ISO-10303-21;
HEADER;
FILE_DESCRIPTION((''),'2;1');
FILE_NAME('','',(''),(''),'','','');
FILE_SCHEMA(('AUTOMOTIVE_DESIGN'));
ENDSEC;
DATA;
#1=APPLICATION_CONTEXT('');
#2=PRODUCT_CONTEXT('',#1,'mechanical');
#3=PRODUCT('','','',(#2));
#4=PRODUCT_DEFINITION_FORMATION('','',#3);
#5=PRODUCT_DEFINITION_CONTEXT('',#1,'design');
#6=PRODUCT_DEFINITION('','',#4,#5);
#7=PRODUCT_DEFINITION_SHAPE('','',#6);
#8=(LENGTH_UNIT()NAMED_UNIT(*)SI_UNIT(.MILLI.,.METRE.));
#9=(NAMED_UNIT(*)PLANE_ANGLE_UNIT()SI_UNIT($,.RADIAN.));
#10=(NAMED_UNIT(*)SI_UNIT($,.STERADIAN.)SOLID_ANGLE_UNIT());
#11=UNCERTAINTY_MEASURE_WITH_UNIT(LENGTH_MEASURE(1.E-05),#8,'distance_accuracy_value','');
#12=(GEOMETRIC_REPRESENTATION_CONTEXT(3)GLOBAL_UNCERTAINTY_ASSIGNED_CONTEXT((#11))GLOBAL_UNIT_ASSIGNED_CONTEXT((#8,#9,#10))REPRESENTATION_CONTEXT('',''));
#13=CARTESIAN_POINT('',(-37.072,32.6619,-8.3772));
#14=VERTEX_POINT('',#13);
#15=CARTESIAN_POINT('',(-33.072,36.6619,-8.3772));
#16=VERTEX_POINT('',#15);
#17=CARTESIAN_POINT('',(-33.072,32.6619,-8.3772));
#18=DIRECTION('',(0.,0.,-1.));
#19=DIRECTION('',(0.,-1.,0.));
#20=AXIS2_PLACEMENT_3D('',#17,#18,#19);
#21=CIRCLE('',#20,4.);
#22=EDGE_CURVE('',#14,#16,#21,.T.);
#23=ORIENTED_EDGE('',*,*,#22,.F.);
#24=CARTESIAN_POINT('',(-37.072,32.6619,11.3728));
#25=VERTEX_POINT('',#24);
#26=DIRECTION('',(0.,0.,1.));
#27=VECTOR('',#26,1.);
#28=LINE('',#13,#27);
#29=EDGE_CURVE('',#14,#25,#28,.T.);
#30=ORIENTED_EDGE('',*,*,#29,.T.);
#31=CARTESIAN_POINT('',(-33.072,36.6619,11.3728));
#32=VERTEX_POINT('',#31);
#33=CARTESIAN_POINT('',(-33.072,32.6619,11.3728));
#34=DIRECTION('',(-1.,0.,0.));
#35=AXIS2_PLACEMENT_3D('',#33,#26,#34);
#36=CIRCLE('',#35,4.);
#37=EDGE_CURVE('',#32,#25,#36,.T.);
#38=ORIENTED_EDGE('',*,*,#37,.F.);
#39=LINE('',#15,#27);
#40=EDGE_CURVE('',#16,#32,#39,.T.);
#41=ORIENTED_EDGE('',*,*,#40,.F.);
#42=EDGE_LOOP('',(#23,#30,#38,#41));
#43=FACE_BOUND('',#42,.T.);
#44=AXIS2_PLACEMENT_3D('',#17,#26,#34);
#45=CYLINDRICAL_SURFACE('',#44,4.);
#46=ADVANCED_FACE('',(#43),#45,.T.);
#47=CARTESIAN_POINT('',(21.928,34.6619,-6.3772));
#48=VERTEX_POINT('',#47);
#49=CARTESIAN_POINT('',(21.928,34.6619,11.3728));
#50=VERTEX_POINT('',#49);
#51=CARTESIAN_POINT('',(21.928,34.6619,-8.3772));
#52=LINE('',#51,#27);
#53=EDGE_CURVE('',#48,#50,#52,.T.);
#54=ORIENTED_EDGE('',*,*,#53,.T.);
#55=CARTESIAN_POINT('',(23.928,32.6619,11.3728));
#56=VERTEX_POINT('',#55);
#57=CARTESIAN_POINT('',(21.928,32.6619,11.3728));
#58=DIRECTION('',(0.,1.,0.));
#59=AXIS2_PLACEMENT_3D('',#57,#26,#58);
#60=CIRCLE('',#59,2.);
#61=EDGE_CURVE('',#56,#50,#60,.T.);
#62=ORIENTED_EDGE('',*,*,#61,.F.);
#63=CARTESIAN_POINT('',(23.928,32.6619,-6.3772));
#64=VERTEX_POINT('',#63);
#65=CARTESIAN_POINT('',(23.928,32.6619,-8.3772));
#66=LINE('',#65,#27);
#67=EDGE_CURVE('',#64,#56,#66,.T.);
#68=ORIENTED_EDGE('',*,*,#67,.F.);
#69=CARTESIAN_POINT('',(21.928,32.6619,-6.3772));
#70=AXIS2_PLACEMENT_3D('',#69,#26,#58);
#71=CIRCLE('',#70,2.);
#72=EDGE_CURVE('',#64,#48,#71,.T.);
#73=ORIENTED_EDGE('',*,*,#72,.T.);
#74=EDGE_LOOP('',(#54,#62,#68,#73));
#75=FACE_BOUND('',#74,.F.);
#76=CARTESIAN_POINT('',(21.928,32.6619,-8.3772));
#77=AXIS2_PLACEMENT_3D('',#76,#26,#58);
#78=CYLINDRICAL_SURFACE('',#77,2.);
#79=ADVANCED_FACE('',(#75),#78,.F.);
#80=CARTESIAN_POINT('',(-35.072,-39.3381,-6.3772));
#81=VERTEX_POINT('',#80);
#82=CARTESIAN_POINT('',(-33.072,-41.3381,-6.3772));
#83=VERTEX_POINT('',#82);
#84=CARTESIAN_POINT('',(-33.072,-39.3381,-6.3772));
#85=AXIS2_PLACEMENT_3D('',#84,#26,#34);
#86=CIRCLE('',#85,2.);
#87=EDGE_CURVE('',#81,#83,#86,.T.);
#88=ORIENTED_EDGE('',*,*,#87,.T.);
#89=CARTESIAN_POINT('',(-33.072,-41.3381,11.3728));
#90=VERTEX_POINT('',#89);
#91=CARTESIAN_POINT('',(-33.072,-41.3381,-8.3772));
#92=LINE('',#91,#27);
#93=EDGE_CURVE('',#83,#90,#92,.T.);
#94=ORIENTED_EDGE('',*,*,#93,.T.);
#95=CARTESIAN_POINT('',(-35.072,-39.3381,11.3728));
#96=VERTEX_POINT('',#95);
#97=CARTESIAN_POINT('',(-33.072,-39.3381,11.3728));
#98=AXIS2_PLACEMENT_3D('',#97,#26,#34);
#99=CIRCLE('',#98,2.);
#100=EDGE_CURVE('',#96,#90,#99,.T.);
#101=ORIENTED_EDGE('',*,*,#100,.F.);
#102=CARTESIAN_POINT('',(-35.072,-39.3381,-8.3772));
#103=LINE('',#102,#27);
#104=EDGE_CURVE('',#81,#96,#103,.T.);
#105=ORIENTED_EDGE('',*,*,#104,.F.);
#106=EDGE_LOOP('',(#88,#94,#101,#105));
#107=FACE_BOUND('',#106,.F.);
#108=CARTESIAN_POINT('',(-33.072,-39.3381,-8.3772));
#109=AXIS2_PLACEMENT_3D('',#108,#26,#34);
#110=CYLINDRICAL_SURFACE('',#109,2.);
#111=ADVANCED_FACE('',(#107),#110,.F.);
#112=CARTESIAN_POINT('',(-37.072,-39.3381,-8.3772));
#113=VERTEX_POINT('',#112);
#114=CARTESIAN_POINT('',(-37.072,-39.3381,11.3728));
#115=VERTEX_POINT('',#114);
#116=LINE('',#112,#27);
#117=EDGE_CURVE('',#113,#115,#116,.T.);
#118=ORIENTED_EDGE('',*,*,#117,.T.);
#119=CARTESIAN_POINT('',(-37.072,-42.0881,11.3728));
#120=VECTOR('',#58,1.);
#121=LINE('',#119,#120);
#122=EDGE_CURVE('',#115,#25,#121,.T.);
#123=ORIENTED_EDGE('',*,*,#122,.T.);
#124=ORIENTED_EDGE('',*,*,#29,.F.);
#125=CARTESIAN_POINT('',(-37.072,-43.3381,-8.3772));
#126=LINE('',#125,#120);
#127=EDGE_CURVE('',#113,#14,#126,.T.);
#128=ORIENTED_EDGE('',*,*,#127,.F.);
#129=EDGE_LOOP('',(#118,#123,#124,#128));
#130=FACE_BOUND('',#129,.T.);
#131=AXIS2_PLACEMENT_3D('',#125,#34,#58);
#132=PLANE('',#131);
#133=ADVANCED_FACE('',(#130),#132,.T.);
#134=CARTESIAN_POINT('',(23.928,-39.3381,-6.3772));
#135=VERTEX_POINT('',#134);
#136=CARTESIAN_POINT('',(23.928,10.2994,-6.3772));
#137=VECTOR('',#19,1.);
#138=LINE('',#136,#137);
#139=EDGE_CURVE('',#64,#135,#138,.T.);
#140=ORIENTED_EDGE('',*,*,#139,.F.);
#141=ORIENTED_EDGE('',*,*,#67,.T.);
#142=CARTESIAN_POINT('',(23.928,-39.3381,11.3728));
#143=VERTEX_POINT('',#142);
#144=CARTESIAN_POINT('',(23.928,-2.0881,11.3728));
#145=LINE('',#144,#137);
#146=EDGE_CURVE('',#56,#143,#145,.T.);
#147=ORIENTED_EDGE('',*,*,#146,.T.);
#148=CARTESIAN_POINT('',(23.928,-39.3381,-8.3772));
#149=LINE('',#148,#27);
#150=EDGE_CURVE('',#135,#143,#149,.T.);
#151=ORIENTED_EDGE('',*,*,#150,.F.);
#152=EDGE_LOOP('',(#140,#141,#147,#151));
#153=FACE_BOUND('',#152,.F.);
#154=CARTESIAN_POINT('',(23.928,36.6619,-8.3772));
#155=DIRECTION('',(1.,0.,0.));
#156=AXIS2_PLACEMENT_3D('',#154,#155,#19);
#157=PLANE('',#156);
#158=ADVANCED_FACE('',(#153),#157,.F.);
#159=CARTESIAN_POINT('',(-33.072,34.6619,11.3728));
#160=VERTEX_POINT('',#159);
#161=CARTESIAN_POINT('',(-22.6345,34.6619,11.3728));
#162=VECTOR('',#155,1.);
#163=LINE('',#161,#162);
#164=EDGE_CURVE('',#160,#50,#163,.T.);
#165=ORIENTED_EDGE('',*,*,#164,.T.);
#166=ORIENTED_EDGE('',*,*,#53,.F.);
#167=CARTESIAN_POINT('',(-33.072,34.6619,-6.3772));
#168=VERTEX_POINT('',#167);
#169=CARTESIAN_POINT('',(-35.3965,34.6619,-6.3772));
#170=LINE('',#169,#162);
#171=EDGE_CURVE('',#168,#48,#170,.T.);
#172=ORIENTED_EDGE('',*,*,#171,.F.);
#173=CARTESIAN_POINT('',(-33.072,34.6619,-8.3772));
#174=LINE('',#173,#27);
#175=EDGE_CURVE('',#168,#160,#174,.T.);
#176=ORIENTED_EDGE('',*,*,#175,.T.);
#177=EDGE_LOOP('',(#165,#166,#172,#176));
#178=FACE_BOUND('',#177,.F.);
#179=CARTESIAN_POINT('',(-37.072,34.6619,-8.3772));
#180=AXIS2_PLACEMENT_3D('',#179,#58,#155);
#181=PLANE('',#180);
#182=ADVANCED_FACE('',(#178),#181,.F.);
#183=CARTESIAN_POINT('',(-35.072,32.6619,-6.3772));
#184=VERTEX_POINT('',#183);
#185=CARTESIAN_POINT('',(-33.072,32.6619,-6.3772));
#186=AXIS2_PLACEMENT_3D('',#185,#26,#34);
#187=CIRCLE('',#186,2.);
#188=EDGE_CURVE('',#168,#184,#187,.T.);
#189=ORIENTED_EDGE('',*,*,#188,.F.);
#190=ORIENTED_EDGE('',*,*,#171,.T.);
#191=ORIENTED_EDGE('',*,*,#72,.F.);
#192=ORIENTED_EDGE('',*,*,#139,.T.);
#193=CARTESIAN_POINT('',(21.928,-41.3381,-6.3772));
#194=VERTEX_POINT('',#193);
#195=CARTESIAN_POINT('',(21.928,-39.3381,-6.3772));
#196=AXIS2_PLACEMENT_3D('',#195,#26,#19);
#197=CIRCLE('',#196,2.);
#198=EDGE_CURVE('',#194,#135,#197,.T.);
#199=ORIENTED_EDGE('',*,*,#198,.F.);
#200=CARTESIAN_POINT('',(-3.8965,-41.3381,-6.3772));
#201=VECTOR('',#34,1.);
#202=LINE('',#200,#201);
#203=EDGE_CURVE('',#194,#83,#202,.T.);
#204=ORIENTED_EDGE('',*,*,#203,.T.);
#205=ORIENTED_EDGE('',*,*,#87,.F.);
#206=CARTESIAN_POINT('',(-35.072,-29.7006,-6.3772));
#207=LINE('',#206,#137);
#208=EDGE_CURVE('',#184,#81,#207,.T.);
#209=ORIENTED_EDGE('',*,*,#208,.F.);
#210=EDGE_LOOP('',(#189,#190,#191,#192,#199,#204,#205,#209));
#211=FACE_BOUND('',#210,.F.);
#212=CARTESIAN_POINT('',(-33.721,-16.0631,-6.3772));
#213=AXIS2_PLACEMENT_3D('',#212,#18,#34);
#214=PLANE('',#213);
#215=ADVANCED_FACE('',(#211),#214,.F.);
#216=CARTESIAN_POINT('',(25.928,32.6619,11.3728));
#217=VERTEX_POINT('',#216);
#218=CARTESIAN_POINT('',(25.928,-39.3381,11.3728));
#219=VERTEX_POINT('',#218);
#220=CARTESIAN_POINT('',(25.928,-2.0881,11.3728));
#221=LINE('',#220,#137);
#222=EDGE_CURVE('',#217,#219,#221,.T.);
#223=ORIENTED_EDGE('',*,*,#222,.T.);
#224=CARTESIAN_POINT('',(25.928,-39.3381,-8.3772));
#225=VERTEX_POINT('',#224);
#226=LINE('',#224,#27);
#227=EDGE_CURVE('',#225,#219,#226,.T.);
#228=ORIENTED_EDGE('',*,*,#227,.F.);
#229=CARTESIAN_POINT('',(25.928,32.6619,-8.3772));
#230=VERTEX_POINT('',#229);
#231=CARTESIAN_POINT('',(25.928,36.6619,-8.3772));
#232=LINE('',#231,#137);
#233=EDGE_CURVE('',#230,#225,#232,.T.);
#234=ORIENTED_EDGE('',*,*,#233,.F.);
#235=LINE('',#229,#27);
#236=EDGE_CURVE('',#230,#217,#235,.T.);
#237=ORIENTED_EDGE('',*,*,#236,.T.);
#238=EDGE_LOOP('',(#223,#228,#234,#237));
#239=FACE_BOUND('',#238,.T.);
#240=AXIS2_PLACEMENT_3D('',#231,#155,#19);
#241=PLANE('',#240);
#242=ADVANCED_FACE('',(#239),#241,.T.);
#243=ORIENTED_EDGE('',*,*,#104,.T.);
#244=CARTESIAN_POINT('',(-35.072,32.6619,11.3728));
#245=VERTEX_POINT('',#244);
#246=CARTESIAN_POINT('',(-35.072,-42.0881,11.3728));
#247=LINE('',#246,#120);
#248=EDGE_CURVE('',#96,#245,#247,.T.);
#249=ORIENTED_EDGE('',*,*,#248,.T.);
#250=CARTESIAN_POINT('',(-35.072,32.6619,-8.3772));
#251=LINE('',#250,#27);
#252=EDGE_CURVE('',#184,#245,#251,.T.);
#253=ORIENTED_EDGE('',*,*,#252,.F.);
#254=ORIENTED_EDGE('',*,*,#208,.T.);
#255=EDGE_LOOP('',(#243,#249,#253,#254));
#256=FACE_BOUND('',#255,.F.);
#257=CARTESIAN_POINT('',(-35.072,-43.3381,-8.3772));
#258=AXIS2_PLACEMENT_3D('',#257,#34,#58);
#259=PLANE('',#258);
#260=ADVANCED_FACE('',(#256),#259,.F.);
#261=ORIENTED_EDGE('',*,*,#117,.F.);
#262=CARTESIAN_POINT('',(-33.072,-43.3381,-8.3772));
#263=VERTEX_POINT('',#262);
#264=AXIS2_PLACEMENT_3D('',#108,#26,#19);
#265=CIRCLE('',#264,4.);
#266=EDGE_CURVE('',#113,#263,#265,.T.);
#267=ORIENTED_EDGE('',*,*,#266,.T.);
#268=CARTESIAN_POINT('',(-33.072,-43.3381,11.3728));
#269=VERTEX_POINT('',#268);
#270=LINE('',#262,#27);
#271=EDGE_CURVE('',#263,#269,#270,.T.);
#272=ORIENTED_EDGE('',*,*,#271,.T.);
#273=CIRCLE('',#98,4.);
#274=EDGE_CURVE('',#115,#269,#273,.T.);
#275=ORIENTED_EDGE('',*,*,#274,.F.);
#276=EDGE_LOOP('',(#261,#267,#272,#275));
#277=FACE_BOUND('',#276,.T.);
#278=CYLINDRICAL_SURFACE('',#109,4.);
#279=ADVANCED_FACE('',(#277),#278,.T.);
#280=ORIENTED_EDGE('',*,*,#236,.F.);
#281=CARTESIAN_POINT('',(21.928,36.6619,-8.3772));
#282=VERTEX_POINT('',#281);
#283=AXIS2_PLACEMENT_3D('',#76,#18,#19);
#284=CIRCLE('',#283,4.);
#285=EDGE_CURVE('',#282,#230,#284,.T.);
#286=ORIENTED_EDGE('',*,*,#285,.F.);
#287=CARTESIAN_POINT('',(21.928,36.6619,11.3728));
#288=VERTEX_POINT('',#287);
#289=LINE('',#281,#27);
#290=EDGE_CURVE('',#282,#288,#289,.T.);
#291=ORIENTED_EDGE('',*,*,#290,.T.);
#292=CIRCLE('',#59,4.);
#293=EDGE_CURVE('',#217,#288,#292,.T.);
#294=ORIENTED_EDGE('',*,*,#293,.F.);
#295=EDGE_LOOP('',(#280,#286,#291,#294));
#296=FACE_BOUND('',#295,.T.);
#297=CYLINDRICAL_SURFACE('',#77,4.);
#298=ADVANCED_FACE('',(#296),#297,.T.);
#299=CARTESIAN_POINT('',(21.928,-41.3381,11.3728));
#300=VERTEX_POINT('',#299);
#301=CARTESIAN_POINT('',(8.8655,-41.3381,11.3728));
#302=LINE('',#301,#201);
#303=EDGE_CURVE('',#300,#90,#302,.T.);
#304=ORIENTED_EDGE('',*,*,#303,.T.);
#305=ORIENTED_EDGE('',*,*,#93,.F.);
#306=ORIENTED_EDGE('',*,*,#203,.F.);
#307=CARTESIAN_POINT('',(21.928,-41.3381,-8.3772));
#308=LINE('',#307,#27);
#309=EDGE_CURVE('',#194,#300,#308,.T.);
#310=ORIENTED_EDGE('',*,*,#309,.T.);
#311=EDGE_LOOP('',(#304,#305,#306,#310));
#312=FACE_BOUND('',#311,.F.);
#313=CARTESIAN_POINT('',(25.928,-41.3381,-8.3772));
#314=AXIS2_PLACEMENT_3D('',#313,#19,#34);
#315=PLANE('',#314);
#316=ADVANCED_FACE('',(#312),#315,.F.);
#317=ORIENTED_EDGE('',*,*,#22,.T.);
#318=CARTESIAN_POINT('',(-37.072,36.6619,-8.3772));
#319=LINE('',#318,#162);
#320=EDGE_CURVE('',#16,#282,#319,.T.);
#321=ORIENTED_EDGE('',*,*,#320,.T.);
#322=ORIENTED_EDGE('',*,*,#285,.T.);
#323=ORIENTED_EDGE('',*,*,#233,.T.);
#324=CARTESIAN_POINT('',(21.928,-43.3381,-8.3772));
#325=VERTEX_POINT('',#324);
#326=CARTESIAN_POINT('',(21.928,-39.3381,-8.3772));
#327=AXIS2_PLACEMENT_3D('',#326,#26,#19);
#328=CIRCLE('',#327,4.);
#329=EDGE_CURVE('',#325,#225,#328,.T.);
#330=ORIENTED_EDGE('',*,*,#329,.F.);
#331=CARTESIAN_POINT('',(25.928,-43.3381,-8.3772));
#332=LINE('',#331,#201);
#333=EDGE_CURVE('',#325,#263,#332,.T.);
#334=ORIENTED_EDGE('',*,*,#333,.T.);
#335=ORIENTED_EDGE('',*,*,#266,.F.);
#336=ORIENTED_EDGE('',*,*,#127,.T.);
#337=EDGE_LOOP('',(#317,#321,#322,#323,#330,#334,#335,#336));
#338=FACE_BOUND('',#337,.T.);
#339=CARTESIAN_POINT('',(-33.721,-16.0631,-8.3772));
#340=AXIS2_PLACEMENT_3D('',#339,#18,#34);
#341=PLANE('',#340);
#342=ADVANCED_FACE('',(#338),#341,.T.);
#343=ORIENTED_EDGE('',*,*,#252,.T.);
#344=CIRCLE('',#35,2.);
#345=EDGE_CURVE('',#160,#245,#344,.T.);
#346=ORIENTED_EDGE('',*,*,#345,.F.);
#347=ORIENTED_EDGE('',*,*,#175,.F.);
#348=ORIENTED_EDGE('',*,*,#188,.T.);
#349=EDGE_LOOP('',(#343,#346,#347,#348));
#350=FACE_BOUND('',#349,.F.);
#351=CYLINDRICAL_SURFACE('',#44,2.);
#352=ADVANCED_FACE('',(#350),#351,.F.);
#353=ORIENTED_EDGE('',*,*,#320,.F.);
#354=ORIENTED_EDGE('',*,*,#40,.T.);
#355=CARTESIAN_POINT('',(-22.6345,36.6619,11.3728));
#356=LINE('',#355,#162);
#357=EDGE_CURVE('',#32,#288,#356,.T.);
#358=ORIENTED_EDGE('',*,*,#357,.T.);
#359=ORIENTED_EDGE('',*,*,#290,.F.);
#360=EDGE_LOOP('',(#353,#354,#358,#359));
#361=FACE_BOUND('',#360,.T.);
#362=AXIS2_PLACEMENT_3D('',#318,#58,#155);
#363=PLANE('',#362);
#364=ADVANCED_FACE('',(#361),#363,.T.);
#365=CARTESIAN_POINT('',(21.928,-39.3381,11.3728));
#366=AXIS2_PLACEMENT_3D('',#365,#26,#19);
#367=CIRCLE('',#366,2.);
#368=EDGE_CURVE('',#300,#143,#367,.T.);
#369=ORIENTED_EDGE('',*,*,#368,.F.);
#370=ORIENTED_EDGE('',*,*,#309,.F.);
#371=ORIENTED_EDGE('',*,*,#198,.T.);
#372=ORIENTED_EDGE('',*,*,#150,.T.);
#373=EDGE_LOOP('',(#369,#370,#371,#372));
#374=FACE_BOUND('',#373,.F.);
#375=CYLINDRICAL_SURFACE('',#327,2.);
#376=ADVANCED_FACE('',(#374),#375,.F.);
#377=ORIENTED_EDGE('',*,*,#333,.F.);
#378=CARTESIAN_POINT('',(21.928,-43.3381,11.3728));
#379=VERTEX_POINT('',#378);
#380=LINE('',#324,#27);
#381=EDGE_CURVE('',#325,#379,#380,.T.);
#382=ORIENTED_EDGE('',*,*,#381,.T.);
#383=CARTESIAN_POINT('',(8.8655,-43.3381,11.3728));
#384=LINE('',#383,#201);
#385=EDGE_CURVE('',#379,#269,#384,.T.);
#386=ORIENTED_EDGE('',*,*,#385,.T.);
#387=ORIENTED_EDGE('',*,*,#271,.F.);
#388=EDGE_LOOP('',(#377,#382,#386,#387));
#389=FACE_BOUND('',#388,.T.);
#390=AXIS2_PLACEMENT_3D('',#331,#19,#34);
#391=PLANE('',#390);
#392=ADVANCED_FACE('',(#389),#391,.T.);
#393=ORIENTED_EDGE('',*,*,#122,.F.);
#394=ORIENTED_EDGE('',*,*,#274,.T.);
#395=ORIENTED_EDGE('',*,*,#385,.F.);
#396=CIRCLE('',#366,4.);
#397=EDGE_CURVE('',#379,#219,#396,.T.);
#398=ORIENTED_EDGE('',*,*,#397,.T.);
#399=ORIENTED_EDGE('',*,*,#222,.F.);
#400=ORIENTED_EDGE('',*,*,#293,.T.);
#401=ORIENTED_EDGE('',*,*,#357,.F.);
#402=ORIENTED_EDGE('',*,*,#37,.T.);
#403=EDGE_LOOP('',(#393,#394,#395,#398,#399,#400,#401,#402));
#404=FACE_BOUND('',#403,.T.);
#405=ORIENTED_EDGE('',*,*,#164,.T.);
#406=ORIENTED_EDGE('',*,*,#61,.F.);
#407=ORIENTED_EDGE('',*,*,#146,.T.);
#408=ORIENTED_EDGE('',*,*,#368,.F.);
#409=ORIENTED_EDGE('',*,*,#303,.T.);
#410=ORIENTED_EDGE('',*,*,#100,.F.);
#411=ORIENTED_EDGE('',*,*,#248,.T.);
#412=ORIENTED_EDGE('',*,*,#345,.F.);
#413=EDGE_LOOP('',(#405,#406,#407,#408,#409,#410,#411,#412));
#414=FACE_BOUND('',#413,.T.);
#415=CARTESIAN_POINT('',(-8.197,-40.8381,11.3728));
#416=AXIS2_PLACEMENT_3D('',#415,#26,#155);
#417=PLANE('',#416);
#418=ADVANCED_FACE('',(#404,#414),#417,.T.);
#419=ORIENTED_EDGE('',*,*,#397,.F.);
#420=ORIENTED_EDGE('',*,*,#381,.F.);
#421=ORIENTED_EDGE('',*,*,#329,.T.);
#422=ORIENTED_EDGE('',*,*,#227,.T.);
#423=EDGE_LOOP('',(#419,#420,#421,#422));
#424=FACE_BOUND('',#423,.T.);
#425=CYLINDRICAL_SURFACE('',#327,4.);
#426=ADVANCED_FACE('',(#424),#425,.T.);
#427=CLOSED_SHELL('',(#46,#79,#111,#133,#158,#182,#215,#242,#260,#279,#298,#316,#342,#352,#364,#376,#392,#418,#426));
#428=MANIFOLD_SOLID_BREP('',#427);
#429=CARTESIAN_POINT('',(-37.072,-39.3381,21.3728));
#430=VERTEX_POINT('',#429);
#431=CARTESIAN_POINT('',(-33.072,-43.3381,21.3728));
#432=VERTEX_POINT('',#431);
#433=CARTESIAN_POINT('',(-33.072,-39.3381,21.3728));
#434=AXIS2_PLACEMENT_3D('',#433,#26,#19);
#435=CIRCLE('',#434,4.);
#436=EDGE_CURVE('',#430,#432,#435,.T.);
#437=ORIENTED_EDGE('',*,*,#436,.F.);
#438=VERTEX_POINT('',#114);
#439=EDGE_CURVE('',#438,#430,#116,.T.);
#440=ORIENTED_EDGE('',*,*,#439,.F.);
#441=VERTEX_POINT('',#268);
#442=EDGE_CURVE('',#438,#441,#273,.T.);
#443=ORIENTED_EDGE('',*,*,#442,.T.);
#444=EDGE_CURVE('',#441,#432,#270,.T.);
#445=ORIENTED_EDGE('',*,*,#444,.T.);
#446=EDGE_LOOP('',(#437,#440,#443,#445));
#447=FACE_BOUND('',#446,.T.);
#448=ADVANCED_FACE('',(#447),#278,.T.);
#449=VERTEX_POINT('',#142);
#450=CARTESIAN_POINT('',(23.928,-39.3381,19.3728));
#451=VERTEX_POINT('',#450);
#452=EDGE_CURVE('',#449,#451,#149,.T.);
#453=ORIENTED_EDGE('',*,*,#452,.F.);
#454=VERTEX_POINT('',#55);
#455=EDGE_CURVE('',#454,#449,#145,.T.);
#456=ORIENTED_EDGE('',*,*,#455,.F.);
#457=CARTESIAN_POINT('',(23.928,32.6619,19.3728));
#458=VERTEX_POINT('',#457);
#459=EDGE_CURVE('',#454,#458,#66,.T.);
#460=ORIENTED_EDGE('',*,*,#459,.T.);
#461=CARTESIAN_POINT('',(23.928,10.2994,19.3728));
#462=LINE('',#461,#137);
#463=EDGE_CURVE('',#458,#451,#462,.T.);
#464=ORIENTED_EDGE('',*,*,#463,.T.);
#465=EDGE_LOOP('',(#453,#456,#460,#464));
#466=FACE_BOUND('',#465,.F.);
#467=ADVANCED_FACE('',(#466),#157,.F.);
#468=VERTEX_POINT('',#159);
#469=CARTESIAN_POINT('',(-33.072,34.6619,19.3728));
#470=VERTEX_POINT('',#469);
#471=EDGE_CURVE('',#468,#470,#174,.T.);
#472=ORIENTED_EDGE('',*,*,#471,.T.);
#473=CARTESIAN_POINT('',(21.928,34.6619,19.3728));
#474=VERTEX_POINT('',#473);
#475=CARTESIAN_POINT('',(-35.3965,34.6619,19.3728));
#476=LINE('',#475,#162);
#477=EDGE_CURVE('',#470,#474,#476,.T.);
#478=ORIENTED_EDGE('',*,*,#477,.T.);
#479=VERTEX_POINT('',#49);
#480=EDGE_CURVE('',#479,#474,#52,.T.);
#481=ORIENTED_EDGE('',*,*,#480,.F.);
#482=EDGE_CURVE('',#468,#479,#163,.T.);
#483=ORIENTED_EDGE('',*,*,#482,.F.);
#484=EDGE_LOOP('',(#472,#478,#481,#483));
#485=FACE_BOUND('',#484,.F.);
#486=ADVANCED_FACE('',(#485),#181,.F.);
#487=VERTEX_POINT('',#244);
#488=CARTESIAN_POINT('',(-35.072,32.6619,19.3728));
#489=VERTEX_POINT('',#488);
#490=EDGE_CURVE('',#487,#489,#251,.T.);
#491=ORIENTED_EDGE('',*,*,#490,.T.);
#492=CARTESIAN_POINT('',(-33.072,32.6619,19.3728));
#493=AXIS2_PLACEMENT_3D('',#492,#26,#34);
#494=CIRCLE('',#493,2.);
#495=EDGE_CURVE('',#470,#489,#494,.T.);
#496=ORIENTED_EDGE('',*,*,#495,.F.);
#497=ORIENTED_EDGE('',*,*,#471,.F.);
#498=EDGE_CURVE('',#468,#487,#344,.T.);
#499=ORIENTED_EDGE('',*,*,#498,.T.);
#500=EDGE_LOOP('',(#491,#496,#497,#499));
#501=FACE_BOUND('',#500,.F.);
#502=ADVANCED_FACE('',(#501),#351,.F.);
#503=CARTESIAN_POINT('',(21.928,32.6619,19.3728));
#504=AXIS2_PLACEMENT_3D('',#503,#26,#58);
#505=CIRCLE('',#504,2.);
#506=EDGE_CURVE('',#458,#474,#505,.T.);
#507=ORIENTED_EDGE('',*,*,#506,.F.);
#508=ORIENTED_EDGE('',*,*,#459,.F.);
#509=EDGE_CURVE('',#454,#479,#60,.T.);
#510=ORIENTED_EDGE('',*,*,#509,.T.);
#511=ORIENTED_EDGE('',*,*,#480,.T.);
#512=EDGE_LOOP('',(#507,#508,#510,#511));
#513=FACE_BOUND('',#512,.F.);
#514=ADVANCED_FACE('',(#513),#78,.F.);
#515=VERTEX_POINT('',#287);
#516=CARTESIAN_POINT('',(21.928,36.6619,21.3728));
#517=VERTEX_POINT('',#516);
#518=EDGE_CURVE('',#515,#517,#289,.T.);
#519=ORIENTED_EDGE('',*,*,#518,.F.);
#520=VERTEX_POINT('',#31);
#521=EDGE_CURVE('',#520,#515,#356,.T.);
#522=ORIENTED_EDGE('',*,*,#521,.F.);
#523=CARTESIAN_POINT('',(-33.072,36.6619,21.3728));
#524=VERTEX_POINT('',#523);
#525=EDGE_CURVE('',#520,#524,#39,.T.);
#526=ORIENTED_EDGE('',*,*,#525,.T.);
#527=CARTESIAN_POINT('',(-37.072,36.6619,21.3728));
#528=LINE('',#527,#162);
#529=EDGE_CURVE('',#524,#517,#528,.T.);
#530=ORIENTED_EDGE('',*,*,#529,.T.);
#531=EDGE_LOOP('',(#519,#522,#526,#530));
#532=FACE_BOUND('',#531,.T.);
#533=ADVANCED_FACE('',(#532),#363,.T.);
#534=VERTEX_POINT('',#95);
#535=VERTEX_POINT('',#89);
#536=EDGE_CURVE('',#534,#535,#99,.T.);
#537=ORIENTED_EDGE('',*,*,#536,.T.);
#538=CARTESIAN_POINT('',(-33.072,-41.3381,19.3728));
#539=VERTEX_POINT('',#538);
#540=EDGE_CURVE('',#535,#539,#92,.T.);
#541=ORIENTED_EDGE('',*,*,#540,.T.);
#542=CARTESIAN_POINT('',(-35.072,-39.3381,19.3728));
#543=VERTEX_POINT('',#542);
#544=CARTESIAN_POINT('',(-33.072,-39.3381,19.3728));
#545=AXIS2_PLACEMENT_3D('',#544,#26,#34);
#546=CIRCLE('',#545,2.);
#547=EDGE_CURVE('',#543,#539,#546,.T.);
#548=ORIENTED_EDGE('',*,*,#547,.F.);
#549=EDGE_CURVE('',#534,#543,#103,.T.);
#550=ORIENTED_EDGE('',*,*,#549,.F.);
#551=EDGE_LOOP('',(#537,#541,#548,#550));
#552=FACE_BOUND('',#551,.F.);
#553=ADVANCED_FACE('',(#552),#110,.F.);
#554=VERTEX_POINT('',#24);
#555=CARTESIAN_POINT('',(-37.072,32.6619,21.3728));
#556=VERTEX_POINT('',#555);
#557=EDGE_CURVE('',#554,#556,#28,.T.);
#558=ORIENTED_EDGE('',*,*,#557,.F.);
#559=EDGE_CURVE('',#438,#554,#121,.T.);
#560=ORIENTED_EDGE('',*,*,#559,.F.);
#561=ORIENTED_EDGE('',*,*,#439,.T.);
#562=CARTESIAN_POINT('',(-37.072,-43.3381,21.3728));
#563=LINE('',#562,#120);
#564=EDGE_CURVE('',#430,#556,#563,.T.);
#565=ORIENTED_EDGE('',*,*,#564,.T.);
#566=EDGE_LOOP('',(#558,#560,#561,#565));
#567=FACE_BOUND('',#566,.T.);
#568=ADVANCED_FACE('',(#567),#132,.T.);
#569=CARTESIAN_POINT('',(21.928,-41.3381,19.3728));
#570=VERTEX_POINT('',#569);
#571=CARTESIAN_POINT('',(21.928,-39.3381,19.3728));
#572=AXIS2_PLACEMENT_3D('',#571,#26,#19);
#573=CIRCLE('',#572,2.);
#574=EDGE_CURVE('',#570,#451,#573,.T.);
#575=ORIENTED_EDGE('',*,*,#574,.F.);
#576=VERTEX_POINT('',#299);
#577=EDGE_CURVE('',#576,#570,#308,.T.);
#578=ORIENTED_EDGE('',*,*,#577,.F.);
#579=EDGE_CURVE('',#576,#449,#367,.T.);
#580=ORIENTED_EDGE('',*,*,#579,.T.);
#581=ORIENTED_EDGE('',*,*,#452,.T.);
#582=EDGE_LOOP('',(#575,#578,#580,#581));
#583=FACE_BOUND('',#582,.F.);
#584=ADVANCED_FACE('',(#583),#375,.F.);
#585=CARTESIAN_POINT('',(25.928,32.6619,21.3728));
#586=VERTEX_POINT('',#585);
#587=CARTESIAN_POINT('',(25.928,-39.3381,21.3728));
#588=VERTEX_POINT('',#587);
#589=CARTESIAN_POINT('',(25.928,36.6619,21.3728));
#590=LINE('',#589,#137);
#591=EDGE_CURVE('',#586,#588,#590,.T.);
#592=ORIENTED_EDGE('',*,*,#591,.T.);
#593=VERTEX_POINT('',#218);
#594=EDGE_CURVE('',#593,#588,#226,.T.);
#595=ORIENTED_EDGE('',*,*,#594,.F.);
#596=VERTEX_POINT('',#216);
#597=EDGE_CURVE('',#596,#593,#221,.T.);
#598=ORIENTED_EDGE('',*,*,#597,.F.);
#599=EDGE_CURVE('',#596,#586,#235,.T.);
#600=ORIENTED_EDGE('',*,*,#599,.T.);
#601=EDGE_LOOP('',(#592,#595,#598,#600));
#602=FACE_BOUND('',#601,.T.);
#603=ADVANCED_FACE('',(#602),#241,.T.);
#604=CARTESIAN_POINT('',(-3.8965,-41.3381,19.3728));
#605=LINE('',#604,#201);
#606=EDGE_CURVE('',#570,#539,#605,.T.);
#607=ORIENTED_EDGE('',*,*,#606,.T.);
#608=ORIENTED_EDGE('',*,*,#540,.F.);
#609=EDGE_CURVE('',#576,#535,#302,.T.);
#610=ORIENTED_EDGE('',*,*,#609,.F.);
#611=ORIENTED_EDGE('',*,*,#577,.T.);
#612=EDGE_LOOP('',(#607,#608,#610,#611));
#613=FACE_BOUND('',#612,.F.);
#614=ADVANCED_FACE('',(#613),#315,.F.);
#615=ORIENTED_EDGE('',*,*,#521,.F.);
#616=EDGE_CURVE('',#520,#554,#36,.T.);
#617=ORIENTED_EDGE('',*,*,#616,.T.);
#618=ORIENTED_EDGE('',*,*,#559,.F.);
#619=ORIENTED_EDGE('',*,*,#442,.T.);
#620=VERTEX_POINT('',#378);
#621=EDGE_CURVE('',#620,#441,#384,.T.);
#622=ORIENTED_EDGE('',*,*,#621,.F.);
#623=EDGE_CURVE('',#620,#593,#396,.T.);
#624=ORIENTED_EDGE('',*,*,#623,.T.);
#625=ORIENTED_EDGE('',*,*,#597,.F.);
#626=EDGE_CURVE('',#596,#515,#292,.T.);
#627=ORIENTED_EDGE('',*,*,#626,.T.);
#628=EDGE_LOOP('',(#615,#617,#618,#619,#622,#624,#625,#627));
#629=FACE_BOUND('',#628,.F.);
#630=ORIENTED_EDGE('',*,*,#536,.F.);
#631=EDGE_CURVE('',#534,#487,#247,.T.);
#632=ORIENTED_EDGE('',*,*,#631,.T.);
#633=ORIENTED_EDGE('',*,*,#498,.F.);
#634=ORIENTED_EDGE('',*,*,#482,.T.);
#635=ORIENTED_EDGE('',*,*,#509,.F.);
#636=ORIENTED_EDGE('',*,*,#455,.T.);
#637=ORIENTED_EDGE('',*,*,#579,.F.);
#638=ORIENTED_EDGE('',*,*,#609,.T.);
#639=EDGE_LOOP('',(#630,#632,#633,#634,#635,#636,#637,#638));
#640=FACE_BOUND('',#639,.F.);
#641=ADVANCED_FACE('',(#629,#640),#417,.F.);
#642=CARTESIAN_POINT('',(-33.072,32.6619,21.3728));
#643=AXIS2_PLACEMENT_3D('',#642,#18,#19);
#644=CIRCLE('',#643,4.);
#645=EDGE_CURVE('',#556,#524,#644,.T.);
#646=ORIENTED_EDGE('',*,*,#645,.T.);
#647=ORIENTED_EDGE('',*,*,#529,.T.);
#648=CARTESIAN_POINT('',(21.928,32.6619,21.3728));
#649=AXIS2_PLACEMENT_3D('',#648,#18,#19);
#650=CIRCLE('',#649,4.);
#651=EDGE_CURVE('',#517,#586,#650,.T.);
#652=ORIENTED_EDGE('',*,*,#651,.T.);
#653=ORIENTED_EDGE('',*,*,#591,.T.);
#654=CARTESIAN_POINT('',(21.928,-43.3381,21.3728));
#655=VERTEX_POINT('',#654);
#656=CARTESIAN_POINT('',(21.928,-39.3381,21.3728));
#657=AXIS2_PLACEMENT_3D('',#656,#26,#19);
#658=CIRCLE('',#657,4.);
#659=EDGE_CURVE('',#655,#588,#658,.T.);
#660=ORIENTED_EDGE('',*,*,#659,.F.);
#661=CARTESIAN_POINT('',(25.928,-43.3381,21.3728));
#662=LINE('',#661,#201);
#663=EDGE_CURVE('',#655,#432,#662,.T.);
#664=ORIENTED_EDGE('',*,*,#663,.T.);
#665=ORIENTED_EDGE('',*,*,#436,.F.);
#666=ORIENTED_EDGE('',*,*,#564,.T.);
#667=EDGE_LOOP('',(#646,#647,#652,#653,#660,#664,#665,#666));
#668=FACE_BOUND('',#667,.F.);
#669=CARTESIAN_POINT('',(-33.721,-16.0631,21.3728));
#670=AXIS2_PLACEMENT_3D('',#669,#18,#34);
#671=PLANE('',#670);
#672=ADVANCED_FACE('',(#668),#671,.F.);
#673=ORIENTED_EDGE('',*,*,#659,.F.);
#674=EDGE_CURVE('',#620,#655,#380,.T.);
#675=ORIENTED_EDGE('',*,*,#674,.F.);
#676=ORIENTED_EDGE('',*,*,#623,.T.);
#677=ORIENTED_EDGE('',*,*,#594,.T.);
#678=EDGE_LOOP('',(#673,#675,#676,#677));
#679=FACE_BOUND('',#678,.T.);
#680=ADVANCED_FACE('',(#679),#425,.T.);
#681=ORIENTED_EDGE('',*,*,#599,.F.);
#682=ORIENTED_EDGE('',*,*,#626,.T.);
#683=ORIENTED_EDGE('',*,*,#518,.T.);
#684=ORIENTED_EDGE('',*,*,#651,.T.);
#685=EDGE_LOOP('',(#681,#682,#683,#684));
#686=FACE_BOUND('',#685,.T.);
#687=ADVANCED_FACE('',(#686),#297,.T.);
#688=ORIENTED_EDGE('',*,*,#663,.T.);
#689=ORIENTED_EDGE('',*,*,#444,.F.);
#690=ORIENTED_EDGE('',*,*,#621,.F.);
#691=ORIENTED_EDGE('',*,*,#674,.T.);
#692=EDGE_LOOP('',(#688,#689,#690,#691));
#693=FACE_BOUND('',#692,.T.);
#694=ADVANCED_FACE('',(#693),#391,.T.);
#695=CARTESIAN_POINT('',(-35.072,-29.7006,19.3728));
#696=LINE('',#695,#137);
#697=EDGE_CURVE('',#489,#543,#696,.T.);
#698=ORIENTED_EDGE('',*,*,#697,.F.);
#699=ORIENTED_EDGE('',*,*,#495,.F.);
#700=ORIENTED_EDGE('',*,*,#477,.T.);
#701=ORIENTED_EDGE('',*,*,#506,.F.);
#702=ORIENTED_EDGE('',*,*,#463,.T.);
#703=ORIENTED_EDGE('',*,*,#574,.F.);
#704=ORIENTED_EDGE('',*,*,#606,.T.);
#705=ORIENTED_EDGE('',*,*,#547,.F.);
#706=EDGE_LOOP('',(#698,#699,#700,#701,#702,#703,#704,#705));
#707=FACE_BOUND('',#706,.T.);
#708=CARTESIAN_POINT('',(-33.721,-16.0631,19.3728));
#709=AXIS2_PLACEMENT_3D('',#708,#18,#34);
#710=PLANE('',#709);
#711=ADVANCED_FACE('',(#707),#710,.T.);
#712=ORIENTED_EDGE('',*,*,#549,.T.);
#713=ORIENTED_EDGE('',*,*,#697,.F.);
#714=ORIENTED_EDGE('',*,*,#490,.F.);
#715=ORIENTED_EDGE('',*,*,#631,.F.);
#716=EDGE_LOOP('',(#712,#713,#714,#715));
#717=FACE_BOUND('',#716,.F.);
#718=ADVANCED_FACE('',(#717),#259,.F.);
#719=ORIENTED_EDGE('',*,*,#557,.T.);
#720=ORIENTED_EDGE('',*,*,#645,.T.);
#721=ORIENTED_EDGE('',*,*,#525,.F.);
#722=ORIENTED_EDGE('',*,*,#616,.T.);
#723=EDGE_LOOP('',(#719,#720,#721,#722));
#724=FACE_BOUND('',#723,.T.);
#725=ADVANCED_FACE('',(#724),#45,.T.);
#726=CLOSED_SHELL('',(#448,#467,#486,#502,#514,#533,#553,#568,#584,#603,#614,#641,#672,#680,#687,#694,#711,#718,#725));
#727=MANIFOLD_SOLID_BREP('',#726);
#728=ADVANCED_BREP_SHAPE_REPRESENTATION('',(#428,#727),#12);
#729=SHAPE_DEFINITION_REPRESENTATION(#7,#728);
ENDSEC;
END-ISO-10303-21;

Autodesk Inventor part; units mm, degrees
ref_plane "YZ Plane" through (0, 0, 0) normal (1, 0, 0) x (0, 1, 0)
ref_plane "XZ Plane" through (0, 0, 0) normal (0, 1, 0) x (-1, 0, 0)
ref_plane "Work Plane3" through (-33.721, -16.0631, -8.3772) normal (0, 0, -1) x (-1, 0, 0)
sketch "Sketch2" plane through (-33.721, -16.0631, -8.3772) normal (0, 0, -1) x (-1, 0, 0)
  line L0 (3.351, 52.725) -> (-59.649, 52.725)
  line L1 (-59.649, 52.725) -> (-59.649, -27.275)
  line L2 (-59.649, -27.275) -> (3.351, -27.275)
  line L3 (3.351, -27.275) -> (3.351, 52.725)
  line L4 (3.351, 52.725) -> (-59.649, -27.275) construction
  line L5 (-59.649, 52.725) -> (3.351, -27.275) construction
  line L6 (-25.524, -24.775) -> (-3.524, -24.775)
  line L7 (-0.024, 32.975) -> (-0.024, 14.6)
  line L8 (-56.274, -10.275) -> (-56.274, 32.975)
  line L9 (-3.524, 50.225) -> (-25.524, 50.225)
  line L10 (-1.524, 34.475) -> (-56.274, 34.475)
  line L11 (-56.274, -11.775) -> (-56.274, 34.475)
  line L12 (-56.274, -11.775) -> (-1.524, -11.775)
  line L13 (-1.524, -11.775) -> (-1.1358, -11.7239)
  line L14 (-0.774, -11.574) -> (-1.1358, -11.7239)
  line L15 (-0.4633, -11.3357) -> (-0.774, -11.574)
  line L16 (-0.4633, -11.3357) -> (-0.225, -11.025)
  line L17 (-0.0751, -10.6632) -> (-0.225, -11.025)
  line L18 (-0.024, -10.275) -> (-0.0751, -10.6632)
  line L19 (-0.024, 0) -> (-0.024, -10.275)
  line L20 (-0.024, 0) -> (-14.65, 0)
  line L21 (-14.65, 14.6) -> (-14.65, 0)
  line L22 (-0.024, 14.6) -> (-14.65, 14.6)
  line L23 (-0.024, 32.975) -> (-0.024, 14.6)
  line L24 (-0.024, 32.975) -> (-0.0751, 33.3632)
  line L25 (-0.0751, 33.3632) -> (-0.225, 33.725)
  line L26 (-0.225, 33.725) -> (-0.4633, 34.0357)
  line L27 (-0.774, 34.274) -> (-0.4633, 34.0357)
  line L28 (-1.1358, 34.4239) -> (-0.774, 34.274)
  line L29 (-1.1358, 34.4239) -> (-1.524, 34.475)
  line L30 (-46.714, -1.95) -> (-47.364, -1.95)
  line L31 (-46.714, -1.95) -> (-46.714, -2.6)
  line L32 (-47.364, -2.6) -> (-46.714, -2.6)
  line L33 (-47.364, -2.6) -> (-47.364, -1.95)
  line L34 (-37.794, -7.64) -> (-38.444, -7.64)
  line L35 (-37.794, -8.29) -> (-37.794, -7.64)
  line L36 (-38.444, -8.29) -> (-37.794, -8.29)
  line L37 (-38.444, -8.29) -> (-38.444, -7.64)
  line L38 (-2.8885, -10.3772) -> (-3.149, -10.4)
  line L39 (-3.4095, -10.3772) -> (-3.149, -10.4)
  line L40 (-3.662, -10.3095) -> (-3.4095, -10.3772)
  line L41 (-3.899, -10.199) -> (-3.662, -10.3095)
  line L42 (-3.899, -10.199) -> (-4.1132, -10.0491)
  line L43 (-4.1132, -10.0491) -> (-4.2981, -9.8642)
  line L44 (-4.2981, -9.8642) -> (-4.448, -9.65)
  line L45 (-4.5585, -9.413) -> (-4.448, -9.65)
  line L46 (-4.5585, -9.413) -> (-4.6262, -9.1605)
  line L47 (-4.6262, -9.1605) -> (-4.649, -8.9)
  line L48 (-4.649, -8.9) -> (-4.6262, -8.6395)
  line L49 (-4.5585, -8.387) -> (-4.6262, -8.6395)
  line L50 (-4.5585, -8.387) -> (-4.448, -8.15)
  line L51 (-4.448, -8.15) -> (-4.2981, -7.9358)
  line L52 (-4.2981, -7.9358) -> (-4.1132, -7.7509)
  line L53 (-3.899, -7.601) -> (-4.1132, -7.7509)
  line L54 (-3.662, -7.4905) -> (-3.899, -7.601)
  line L55 (-3.662, -7.4905) -> (-3.4095, -7.4228)
  line L56 (-3.4095, -7.4228) -> (-3.149, -7.4)
  line L57 (-2.8885, -7.4228) -> (-3.149, -7.4)
  line L58 (-2.636, -7.4905) -> (-2.8885, -7.4228)
  line L59 (-2.399, -7.601) -> (-2.636, -7.4905)
  line L60 (-2.399, -7.601) -> (-2.1848, -7.7509)
  line L61 (-1.9999, -7.9358) -> (-2.1848, -7.7509)
  line L62 (-1.85, -8.15) -> (-1.9999, -7.9358)
  line L63 (-1.85, -8.15) -> (-1.7395, -8.387)
  line L64 (-1.7395, -8.387) -> (-1.6718, -8.6395)
  line L65 (-1.6718, -8.6395) -> (-1.649, -8.9)
  line L66 (-1.649, -8.9) -> (-1.6718, -9.1605)
  line L67 (-1.7395, -9.413) -> (-1.6718, -9.1605)
  line L68 (-1.7395, -9.413) -> (-1.85, -9.65)
  line L69 (-1.9999, -9.8642) -> (-1.85, -9.65)
  line L70 (-1.9999, -9.8642) -> (-2.1848, -10.0491)
  line L71 (-2.399, -10.199) -> (-2.1848, -10.0491)
  line L72 (-2.636, -10.3095) -> (-2.399, -10.199)
  line L73 (-2.636, -10.3095) -> (-2.8885, -10.3772)
  line L74 (-7.964, -8.29) -> (-7.314, -8.29)
  line L75 (-7.964, -8.29) -> (-7.964, -7.64)
  line L76 (-7.964, -7.64) -> (-7.314, -7.64)
  line L77 (-7.314, -7.64) -> (-7.314, -8.29)
  line L78 (-10.504, -10.83) -> (-9.854, -10.83)
  line L79 (-10.504, -10.18) -> (-10.504, -10.83)
  line L80 (-10.504, -10.18) -> (-9.854, -10.18)
  line L81 (-9.854, -10.18) -> (-9.854, -10.83)
  line L82 (-15.584, -10.83) -> (-14.934, -10.83)
  line L83 (-15.584, -10.18) -> (-15.584, -10.83)
  line L84 (-14.934, -10.18) -> (-15.584, -10.18)
  line L85 (-14.934, -10.18) -> (-14.934, -10.83)
  line L86 (-15.584, -8.29) -> (-14.934, -8.29)
  line L87 (-15.584, -7.64) -> (-15.584, -8.29)
  line L88 (-15.584, -7.64) -> (-14.934, -7.64)
  line L89 (-14.934, -7.64) -> (-14.934, -8.29)
  line L90 (-17.474, -7.64) -> (-17.474, -8.29)
  line L91 (-18.124, -8.29) -> (-17.474, -8.29)
  line L92 (-18.124, -7.64) -> (-18.124, -8.29)
  line L93 (-17.474, -7.64) -> (-18.124, -7.64)
  line L94 (-20.014, -7.64) -> (-20.014, -8.29)
  line L95 (-20.664, -8.29) -> (-20.014, -8.29)
  line L96 (-20.664, -7.64) -> (-20.664, -8.29)
  line L97 (-20.014, -7.64) -> (-20.664, -7.64)
  line L98 (-22.554, -7.64) -> (-22.554, -8.29)
  line L99 (-23.204, -8.29) -> (-22.554, -8.29)
  line L100 (-23.204, -7.64) -> (-23.204, -8.29)
  line L101 (-22.554, -7.64) -> (-23.204, -7.64)
  line L102 (-25.094, -7.64) -> (-25.094, -8.29)
  line L103 (-25.744, -8.29) -> (-25.094, -8.29)
  line L104 (-25.744, -7.64) -> (-25.744, -8.29)
  line L105 (-25.094, -7.64) -> (-25.744, -7.64)
  line L106 (-27.634, -7.64) -> (-27.634, -8.29)
  line L107 (-28.284, -8.29) -> (-27.634, -8.29)
  line L108 (-28.284, -8.29) -> (-28.284, -7.64)
  line L109 (-27.634, -7.64) -> (-28.284, -7.64)
  line L110 (-30.824, -10.83) -> (-30.174, -10.83)
  line L111 (-30.824, -10.18) -> (-30.824, -10.83)
  line L112 (-30.174, -10.18) -> (-30.824, -10.18)
  line L113 (-30.174, -10.18) -> (-30.174, -10.83)
  line L114 (-33.364, -10.83) -> (-32.714, -10.83)
  line L115 (-33.364, -10.18) -> (-33.364, -10.83)
  line L116 (-32.714, -10.18) -> (-33.364, -10.18)
  line L117 (-32.714, -10.18) -> (-32.714, -10.83)
  line L118 (-35.904, -10.83) -> (-35.254, -10.83)
  line L119 (-35.904, -10.18) -> (-35.904, -10.83)
  line L120 (-35.254, -10.18) -> (-35.904, -10.18)
  line L121 (-35.254, -10.18) -> (-35.254, -10.83)
  line L122 (-38.444, -10.83) -> (-37.794, -10.83)
  line L123 (-38.444, -10.18) -> (-38.444, -10.83)
  line L124 (-37.794, -10.18) -> (-38.444, -10.18)
  line L125 (-37.794, -10.18) -> (-37.794, -10.83)
  line L126 (-40.984, -10.83) -> (-40.334, -10.83)
  line L127 (-40.984, -10.18) -> (-40.984, -10.83)
  line L128 (-40.334, -10.18) -> (-40.984, -10.18)
  line L129 (-40.334, -10.18) -> (-40.334, -10.83)
  line L130 (-35.254, -7.64) -> (-35.254, -8.29)
  line L131 (-35.904, -8.29) -> (-35.254, -8.29)
  line L132 (-35.904, -8.29) -> (-35.904, -7.64)
  line L133 (-35.254, -7.64) -> (-35.904, -7.64)
  line L134 (-32.714, -7.64) -> (-32.714, -8.29)
  line L135 (-33.364, -8.29) -> (-32.714, -8.29)
  line L136 (-33.364, -8.29) -> (-33.364, -7.64)
  line L137 (-32.714, -7.64) -> (-33.364, -7.64)
  line L138 (-30.174, -7.64) -> (-30.174, -8.29)
  line L139 (-30.824, -8.29) -> (-30.174, -8.29)
  line L140 (-30.824, -8.29) -> (-30.824, -7.64)
  line L141 (-30.174, -7.64) -> (-30.824, -7.64)
  line L142 (-28.284, -10.83) -> (-27.634, -10.83)
  line L143 (-28.284, -10.18) -> (-28.284, -10.83)
  line L144 (-27.634, -10.18) -> (-28.284, -10.18)
  line L145 (-27.634, -10.18) -> (-27.634, -10.83)
  line L146 (-25.744, -10.83) -> (-25.094, -10.83)
  line L147 (-25.744, -10.18) -> (-25.744, -10.83)
  line L148 (-25.094, -10.18) -> (-25.744, -10.18)
  line L149 (-25.094, -10.18) -> (-25.094, -10.83)
  line L150 (-23.204, -10.83) -> (-22.554, -10.83)
  line L151 (-23.204, -10.18) -> (-23.204, -10.83)
  line L152 (-22.554, -10.18) -> (-23.204, -10.18)
  line L153 (-22.554, -10.18) -> (-22.554, -10.83)
  line L154 (-20.664, -10.83) -> (-20.014, -10.83)
  line L155 (-20.664, -10.18) -> (-20.664, -10.83)
  line L156 (-20.014, -10.18) -> (-20.664, -10.18)
  line L157 (-20.014, -10.18) -> (-20.014, -10.83)
  line L158 (-10.504, -8.29) -> (-9.854, -8.29)
  line L159 (-10.504, -8.29) -> (-10.504, -7.64)
  line L160 (-10.504, -7.64) -> (-9.854, -7.64)
  line L161 (-9.854, -7.64) -> (-9.854, -8.29)
  line L162 (-12.394, -8.29) -> (-12.394, -7.64)
  line L163 (-13.044, -8.29) -> (-12.394, -8.29)
  line L164 (-13.044, -8.29) -> (-13.044, -7.64)
  line L165 (-13.044, -7.64) -> (-12.394, -7.64)
  line L166 (-18.124, -10.83) -> (-17.474, -10.83)
  line L167 (-18.124, -10.18) -> (-18.124, -10.83)
  line L168 (-17.474, -10.18) -> (-18.124, -10.18)
  line L169 (-17.474, -10.18) -> (-17.474, -10.83)
  line L170 (-13.044, -10.83) -> (-12.394, -10.83)
  line L171 (-13.044, -10.18) -> (-13.044, -10.83)
  line L172 (-12.394, -10.18) -> (-13.044, -10.18)
  line L173 (-12.394, -10.18) -> (-12.394, -10.83)
  line L174 (-7.964, -10.83) -> (-7.314, -10.83)
  line L175 (-7.964, -10.18) -> (-7.964, -10.83)
  line L176 (-7.964, -10.18) -> (-7.314, -10.18)
  line L177 (-7.314, -10.18) -> (-7.314, -10.83)
  line L178 (-40.334, -8.29) -> (-40.334, -7.64)
  line L179 (-40.984, -8.29) -> (-40.334, -8.29)
  line L180 (-40.984, -8.29) -> (-40.984, -7.64)
  line L181 (-40.984, -7.64) -> (-40.334, -7.64)
  line L182 (-44.174, -2.6) -> (-44.174, -1.95)
  line L183 (-44.824, -2.6) -> (-44.174, -2.6)
  line L184 (-44.824, -1.95) -> (-44.824, -2.6)
  line L185 (-44.824, -1.95) -> (-44.174, -1.95)
  line L186 (-37.794, 32.88) -> (-37.794, 33.53)
  line L187 (-37.794, 32.88) -> (-38.444, 32.88)
  line L188 (-38.444, 32.88) -> (-38.444, 33.53)
  line L189 (-38.444, 33.53) -> (-37.794, 33.53)
  line L190 (-35.254, 32.88) -> (-35.254, 33.53)
  line L191 (-35.254, 32.88) -> (-35.904, 32.88)
  line L192 (-35.904, 32.88) -> (-35.904, 33.53)
  line L193 (-35.904, 33.53) -> (-35.254, 33.53)
  line L194 (-32.714, 32.88) -> (-32.714, 33.53)
  line L195 (-32.714, 32.88) -> (-33.364, 32.88)
  line L196 (-33.364, 32.88) -> (-33.364, 33.53)
  line L197 (-33.364, 33.53) -> (-32.714, 33.53)
  line L198 (-30.174, 32.88) -> (-30.174, 33.53)
  line L199 (-30.174, 32.88) -> (-30.824, 32.88)
  line L200 (-30.824, 32.88) -> (-30.824, 33.53)
  line L201 (-30.824, 33.53) -> (-30.174, 33.53)
  line L202 (-27.634, 32.88) -> (-27.634, 33.53)
  line L203 (-27.634, 32.88) -> (-28.284, 32.88)
  line L204 (-28.284, 32.88) -> (-28.284, 33.53)
  line L205 (-28.284, 33.53) -> (-27.634, 33.53)
  line L206 (-25.094, 32.88) -> (-25.094, 33.53)
  line L207 (-25.744, 32.88) -> (-25.094, 32.88)
  line L208 (-25.744, 32.88) -> (-25.744, 33.53)
  line L209 (-25.744, 33.53) -> (-25.094, 33.53)
  line L210 (-22.554, 32.88) -> (-22.554, 33.53)
  line L211 (-23.204, 32.88) -> (-22.554, 32.88)
  line L212 (-23.204, 32.88) -> (-23.204, 33.53)
  line L213 (-23.204, 33.53) -> (-22.554, 33.53)
  line L214 (-20.014, 32.88) -> (-20.014, 33.53)
  line L215 (-20.664, 32.88) -> (-20.014, 32.88)
  line L216 (-20.664, 32.88) -> (-20.664, 33.53)
  line L217 (-20.664, 33.53) -> (-20.014, 33.53)
  line L218 (-17.474, 32.88) -> (-17.474, 33.53)
  line L219 (-18.124, 32.88) -> (-17.474, 32.88)
  line L220 (-18.124, 32.88) -> (-18.124, 33.53)
  line L221 (-18.124, 33.53) -> (-17.474, 33.53)
  line L222 (-14.934, 32.88) -> (-14.934, 33.53)
  line L223 (-15.584, 32.88) -> (-14.934, 32.88)
  line L224 (-15.584, 32.88) -> (-15.584, 33.53)
  line L225 (-15.584, 33.53) -> (-14.934, 33.53)
  line L226 (-12.394, 32.88) -> (-12.394, 33.53)
  line L227 (-12.394, 32.88) -> (-13.044, 32.88)
  line L228 (-13.044, 32.88) -> (-13.044, 33.53)
  line L229 (-12.394, 33.53) -> (-13.044, 33.53)
  line L230 (-9.854, 32.88) -> (-9.854, 33.53)
  line L231 (-10.504, 32.88) -> (-9.854, 32.88)
  line L232 (-10.504, 32.88) -> (-10.504, 33.53)
  line L233 (-9.854, 33.53) -> (-10.504, 33.53)
  line L234 (-7.314, 32.88) -> (-7.314, 33.53)
  line L235 (-7.964, 32.88) -> (-7.314, 32.88)
  line L236 (-7.964, 32.88) -> (-7.964, 33.53)
  line L237 (-7.964, 33.53) -> (-7.314, 33.53)
  line L238 (-1.6718, 31.8605) -> (-1.7395, 32.113)
  line L239 (-1.6718, 31.8605) -> (-1.649, 31.6)
  line L240 (-1.649, 31.6) -> (-1.6718, 31.3395)
  line L241 (-1.7395, 31.087) -> (-1.6718, 31.3395)
  line L242 (-1.7395, 31.087) -> (-1.85, 30.85)
  line L243 (-1.85, 30.85) -> (-1.9999, 30.6358)
  line L244 (-2.1848, 30.4509) -> (-1.9999, 30.6358)
  line L245 (-2.1848, 30.4509) -> (-2.399, 30.301)
  line L246 (-2.636, 30.1905) -> (-2.399, 30.301)
  line L247 (-2.8885, 30.1228) -> (-2.636, 30.1905)
  line L248 (-3.149, 30.1) -> (-2.8885, 30.1228)
  line L249 (-3.4095, 30.1228) -> (-3.149, 30.1)
  line L250 (-3.4095, 30.1228) -> (-3.662, 30.1905)
  line L251 (-3.899, 30.301) -> (-3.662, 30.1905)
  line L252 (-4.1132, 30.4509) -> (-3.899, 30.301)
  line L253 (-4.1132, 30.4509) -> (-4.2981, 30.6358)
  line L254 (-4.448, 30.85) -> (-4.2981, 30.6358)
  line L255 (-4.448, 30.85) -> (-4.5585, 31.087)
  line L256 (-4.5585, 31.087) -> (-4.6262, 31.3395)
  line L257 (-4.649, 31.6) -> (-4.6262, 31.3395)
  line L258 (-4.649, 31.6) -> (-4.6262, 31.8605)
  line L259 (-4.6262, 31.8605) -> (-4.5585, 32.113)
  line L260 (-4.5585, 32.113) -> (-4.448, 32.35)
  line L261 (-4.2981, 32.5642) -> (-4.448, 32.35)
  line L262 (-4.2981, 32.5642) -> (-4.1132, 32.7491)
  line L263 (-4.1132, 32.7491) -> (-3.899, 32.899)
  line L264 (-3.662, 33.0095) -> (-3.899, 32.899)
  line L265 (-3.4095, 33.0772) -> (-3.662, 33.0095)
  line L266 (-3.149, 33.1) -> (-3.4095, 33.0772)
  line L267 (-3.149, 33.1) -> (-2.8885, 33.0772)
  line L268 (-2.636, 33.0095) -> (-2.8885, 33.0772)
  line L269 (-2.399, 32.899) -> (-2.636, 33.0095)
  line L270 (-2.1848, 32.7491) -> (-2.399, 32.899)
  line L271 (-2.1848, 32.7491) -> (-1.9999, 32.5642)
  line L272 (-1.9999, 32.5642) -> (-1.85, 32.35)
  line L273 (-1.85, 32.35) -> (-1.7395, 32.113)
  line L274 (-44.399, 30.301) -> (-44.1848, 30.4509)
  line L275 (-44.636, 30.1905) -> (-44.399, 30.301)
  line L276 (-44.636, 30.1905) -> (-44.8885, 30.1228)
  line L277 (-45.149, 30.1) -> (-44.8885, 30.1228)
  line L278 (-45.4095, 30.1228) -> (-45.149, 30.1)
  line L279 (-45.4095, 30.1228) -> (-45.662, 30.1905)
  line L280 (-45.662, 30.1905) -> (-45.899, 30.301)
  line L281 (-45.899, 30.301) -> (-46.1132, 30.4509)
  line L282 (-46.1132, 30.4509) -> (-46.2981, 30.6358)
  line L283 (-46.2981, 30.6358) -> (-46.448, 30.85)
  line L284 (-46.448, 30.85) -> (-46.5585, 31.087)
  line L285 (-46.6262, 31.3395) -> (-46.5585, 31.087)
  line L286 (-46.649, 31.6) -> (-46.6262, 31.3395)
  line L287 (-46.649, 31.6) -> (-46.6262, 31.8605)
  line L288 (-46.6262, 31.8605) -> (-46.5585, 32.113)
  line L289 (-46.5585, 32.113) -> (-46.448, 32.35)
  line L290 (-46.448, 32.35) -> (-46.2981, 32.5642)
  line L291 (-46.1132, 32.7491) -> (-46.2981, 32.5642)
  line L292 (-45.899, 32.899) -> (-46.1132, 32.7491)
  line L293 (-45.899, 32.899) -> (-45.662, 33.0095)
  line L294 (-45.4095, 33.0772) -> (-45.662, 33.0095)
  line L295 (-45.149, 33.1) -> (-45.4095, 33.0772)
  line L296 (-44.8885, 33.0772) -> (-45.149, 33.1)
  line L297 (-44.8885, 33.0772) -> (-44.636, 33.0095)
  line L298 (-44.399, 32.899) -> (-44.636, 33.0095)
  line L299 (-44.399, 32.899) -> (-44.1848, 32.7491)
  line L300 (-43.9999, 32.5642) -> (-44.1848, 32.7491)
  line L301 (-43.9999, 32.5642) -> (-43.85, 32.35)
  line L302 (-43.85, 32.35) -> (-43.7395, 32.113)
  line L303 (-43.7395, 32.113) -> (-43.6718, 31.8605)
  line L304 (-43.6718, 31.8605) -> (-43.649, 31.6)
  line L305 (-43.649, 31.6) -> (-43.6718, 31.3395)
  line L306 (-43.6718, 31.3395) -> (-43.7395, 31.087)
  line L307 (-43.85, 30.85) -> (-43.7395, 31.087)
  line L308 (-43.85, 30.85) -> (-43.9999, 30.6358)
  line L309 (-43.9999, 30.6358) -> (-44.1848, 30.4509)
  line L310 (-40.984, 32.88) -> (-40.984, 33.53)
  line L311 (-40.984, 33.53) -> (-40.334, 33.53)
  line L312 (-40.334, 32.88) -> (-40.334, 33.53)
  line L313 (-40.334, 32.88) -> (-40.984, 32.88)
  line L314 (-41.634, -1.95) -> (-41.634, -2.6)
  line L315 (-41.634, -2.6) -> (-42.284, -2.6)
  line L316 (-42.284, -2.6) -> (-42.284, -1.95)
  line L317 (-41.634, -1.95) -> (-42.284, -1.95)
  line L318 (-43.7395, -8.387) -> (-43.6718, -8.6395)
  line L319 (-43.6718, -8.6395) -> (-43.649, -8.9)
  line L320 (-43.649, -8.9) -> (-43.6718, -9.1605)
  line L321 (-43.6718, -9.1605) -> (-43.7395, -9.413)
  line L322 (-43.85, -9.65) -> (-43.7395, -9.413)
  line L323 (-43.85, -9.65) -> (-43.9999, -9.8642)
  line L324 (-44.1848, -10.0491) -> (-43.9999, -9.8642)
  line L325 (-44.399, -10.199) -> (-44.1848, -10.0491)
  line L326 (-44.636, -10.3095) -> (-44.399, -10.199)
  line L327 (-44.8885, -10.3772) -> (-44.636, -10.3095)
  line L328 (-45.149, -10.4) -> (-44.8885, -10.3772)
  line L329 (-45.4095, -10.3772) -> (-45.149, -10.4)
  line L330 (-45.4095, -10.3772) -> (-45.662, -10.3095)
  line L331 (-45.662, -10.3095) -> (-45.899, -10.199)
  line L332 (-46.1132, -10.0491) -> (-45.899, -10.199)
  line L333 (-46.2981, -9.8642) -> (-46.1132, -10.0491)
  line L334 (-46.2981, -9.8642) -> (-46.448, -9.65)
  line L335 (-46.448, -9.65) -> (-46.5585, -9.413)
  line L336 (-46.6262, -9.1605) -> (-46.5585, -9.413)
  line L337 (-46.649, -8.9) -> (-46.6262, -9.1605)
  line L338 (-46.649, -8.9) -> (-46.6262, -8.6395)
  line L339 (-46.6262, -8.6395) -> (-46.5585, -8.387)
  line L340 (-46.5585, -8.387) -> (-46.448, -8.15)
  line L341 (-46.448, -8.15) -> (-46.2981, -7.9358)
  line L342 (-46.1132, -7.7509) -> (-46.2981, -7.9358)
  line L343 (-45.899, -7.601) -> (-46.1132, -7.7509)
  line L344 (-45.899, -7.601) -> (-45.662, -7.4905)
  line L345 (-45.4095, -7.4228) -> (-45.662, -7.4905)
  line L346 (-45.149, -7.4) -> (-45.4095, -7.4228)
  line L347 (-44.8885, -7.4228) -> (-45.149, -7.4)
  line L348 (-44.8885, -7.4228) -> (-44.636, -7.4905)
  line L349 (-44.399, -7.601) -> (-44.636, -7.4905)
  line L350 (-44.399, -7.601) -> (-44.1848, -7.7509)
  line L351 (-43.9999, -7.9358) -> (-44.1848, -7.7509)
  line L352 (-43.9999, -7.9358) -> (-43.85, -8.15)
  line L353 (-43.85, -8.15) -> (-43.7395, -8.387)
  point P0 (-33.721, 16.0631)
  point P1 (-28.149, 12.725)
  dimension "d2" = 63
  dimension "d3" = 80
  dimension "d4" = 2.5
  dimension "d5" = 3.375
  dimension "d6" = 3.375
  dimension "d7" = 2.5
ref_plane "Work Plane4" through (-28.697, -42.3381, 21.3728) normal (0, 0, 1) x (1, 0, 0)
extrude "Extrusion1" add sketch "Sketch2" against normal up to surface (29.75 mm away) contours L3 L2 L1 L0 | L7 L22 L21 L20 L19 L18 L17 L16 L15 L14 L13 L12 L11 L8 L10 L29 L28 L27 L26 L25 L24 | L31 L32 L33 L30 | L35 L36 L37 L34 | L38 L39 L40 L41 L42 L43 L44 L45 L46 L47 L48 L49 L50 L51 L52 L53 L54 L55 L56 L57 L58 L59 L60 L61 L62 L63 L64 L65 L66 L67 L68 L69 L70 L71 L72 L73 | L75 L76 L77 L74 | L79 L80 L81 L78 | L83 L84 L85 L82 | L87 L88 L89 L86 | L90 L91 L92 L93 | L94 L95 L96 L97 | L98 L99 L100 L101 | L102 L103 L104 L105 | L106 L107 L108 L109 | L111 L112 L113 L110 | L115 L116 L117 L114 | L119 L120 L121 L118 | L123 L124 L125 L122 | L127 L128 L129 L126 | L130 L131 L132 L133 | L134 L135 L136 L137 | L138 L139 L140 L141 | L143 L144 L145 L142 | L147 L148 L149 L146 | L151 L152 L153 L150 | L155 L156 L157 L154 | L159 L160 L161 L158 | L163 L164 L165 L162 | L167 L168 L169 L166 | L171 L172 L173 L170 | L175 L176 L177 L174 | L179 L180 L181 L178 | L183 L184 L185 L182 | L187 L188 L189 L186 | L191 L192 L193 L190 | L195 L196 L197 L194 | L199 L200 L201 L198 | L203 L204 L205 L202 | L207 L208 L209 L206 | L211 L212 L213 L210 | L215 L216 L217 L214 | L219 L220 L221 L218 | L223 L224 L225 L222 | L227 L228 L229 L226 | L231 L232 L233 L230 | L235 L236 L237 L234 | L239 L240 L241 L242 L243 L244 L245 L246 L247 L248 L249 L250 L251 L252 L253 L254 L255 L256 L257 L258 L259 L260 L261 L262 L263 L264 L265 L266 L267 L268 L269 L270 L271 L272 L273 L238 | L275 L276 L277 L278 L279 L280 L281 L282 L283 L284 L285 L286 L287 L288 L289 L290 L291 L292 L293 L294 L295 L296 L297 L298 L299 L300 L301 L302 L303 L304 L305 L306 L307 L308 L309 L274 | L310 L311 L312 L313 | L314 L315 L316 L317 | L318 L319 L320 L321 L322 L323 L324 L325 L326 L327 L328 L329 L330 L331 L332 L333 L334 L335 L336 L337 L338 L339 L340 L341 L342 L343 L344 L345 L346 L347 L348 L349 L350 L351 L352 L353
fillet "Fillet1" radius 4 4 edges at (-37.072, -43.3381, 6.4978) (25.928, -43.3381, 6.4978) (25.928, 36.6619, 6.4978) (-37.072, 36.6619, 6.4978)
shell "Shell1" thickness 2 removed faces 0
ref_plane "Work Plane5" through (-8.197, -40.8381, 11.3728) normal (0, 0, 1) x (1, 0, 0)
split body "Split1" result two bodies by plane through (-8.197, -40.8381, 11.3728) normal (0, 0, 1) first body at (4.928, 8.6619, 20.8728)
equation "\"d6\" = d5"
equation "\"d7\" = d4"
properties part number "bottom"
